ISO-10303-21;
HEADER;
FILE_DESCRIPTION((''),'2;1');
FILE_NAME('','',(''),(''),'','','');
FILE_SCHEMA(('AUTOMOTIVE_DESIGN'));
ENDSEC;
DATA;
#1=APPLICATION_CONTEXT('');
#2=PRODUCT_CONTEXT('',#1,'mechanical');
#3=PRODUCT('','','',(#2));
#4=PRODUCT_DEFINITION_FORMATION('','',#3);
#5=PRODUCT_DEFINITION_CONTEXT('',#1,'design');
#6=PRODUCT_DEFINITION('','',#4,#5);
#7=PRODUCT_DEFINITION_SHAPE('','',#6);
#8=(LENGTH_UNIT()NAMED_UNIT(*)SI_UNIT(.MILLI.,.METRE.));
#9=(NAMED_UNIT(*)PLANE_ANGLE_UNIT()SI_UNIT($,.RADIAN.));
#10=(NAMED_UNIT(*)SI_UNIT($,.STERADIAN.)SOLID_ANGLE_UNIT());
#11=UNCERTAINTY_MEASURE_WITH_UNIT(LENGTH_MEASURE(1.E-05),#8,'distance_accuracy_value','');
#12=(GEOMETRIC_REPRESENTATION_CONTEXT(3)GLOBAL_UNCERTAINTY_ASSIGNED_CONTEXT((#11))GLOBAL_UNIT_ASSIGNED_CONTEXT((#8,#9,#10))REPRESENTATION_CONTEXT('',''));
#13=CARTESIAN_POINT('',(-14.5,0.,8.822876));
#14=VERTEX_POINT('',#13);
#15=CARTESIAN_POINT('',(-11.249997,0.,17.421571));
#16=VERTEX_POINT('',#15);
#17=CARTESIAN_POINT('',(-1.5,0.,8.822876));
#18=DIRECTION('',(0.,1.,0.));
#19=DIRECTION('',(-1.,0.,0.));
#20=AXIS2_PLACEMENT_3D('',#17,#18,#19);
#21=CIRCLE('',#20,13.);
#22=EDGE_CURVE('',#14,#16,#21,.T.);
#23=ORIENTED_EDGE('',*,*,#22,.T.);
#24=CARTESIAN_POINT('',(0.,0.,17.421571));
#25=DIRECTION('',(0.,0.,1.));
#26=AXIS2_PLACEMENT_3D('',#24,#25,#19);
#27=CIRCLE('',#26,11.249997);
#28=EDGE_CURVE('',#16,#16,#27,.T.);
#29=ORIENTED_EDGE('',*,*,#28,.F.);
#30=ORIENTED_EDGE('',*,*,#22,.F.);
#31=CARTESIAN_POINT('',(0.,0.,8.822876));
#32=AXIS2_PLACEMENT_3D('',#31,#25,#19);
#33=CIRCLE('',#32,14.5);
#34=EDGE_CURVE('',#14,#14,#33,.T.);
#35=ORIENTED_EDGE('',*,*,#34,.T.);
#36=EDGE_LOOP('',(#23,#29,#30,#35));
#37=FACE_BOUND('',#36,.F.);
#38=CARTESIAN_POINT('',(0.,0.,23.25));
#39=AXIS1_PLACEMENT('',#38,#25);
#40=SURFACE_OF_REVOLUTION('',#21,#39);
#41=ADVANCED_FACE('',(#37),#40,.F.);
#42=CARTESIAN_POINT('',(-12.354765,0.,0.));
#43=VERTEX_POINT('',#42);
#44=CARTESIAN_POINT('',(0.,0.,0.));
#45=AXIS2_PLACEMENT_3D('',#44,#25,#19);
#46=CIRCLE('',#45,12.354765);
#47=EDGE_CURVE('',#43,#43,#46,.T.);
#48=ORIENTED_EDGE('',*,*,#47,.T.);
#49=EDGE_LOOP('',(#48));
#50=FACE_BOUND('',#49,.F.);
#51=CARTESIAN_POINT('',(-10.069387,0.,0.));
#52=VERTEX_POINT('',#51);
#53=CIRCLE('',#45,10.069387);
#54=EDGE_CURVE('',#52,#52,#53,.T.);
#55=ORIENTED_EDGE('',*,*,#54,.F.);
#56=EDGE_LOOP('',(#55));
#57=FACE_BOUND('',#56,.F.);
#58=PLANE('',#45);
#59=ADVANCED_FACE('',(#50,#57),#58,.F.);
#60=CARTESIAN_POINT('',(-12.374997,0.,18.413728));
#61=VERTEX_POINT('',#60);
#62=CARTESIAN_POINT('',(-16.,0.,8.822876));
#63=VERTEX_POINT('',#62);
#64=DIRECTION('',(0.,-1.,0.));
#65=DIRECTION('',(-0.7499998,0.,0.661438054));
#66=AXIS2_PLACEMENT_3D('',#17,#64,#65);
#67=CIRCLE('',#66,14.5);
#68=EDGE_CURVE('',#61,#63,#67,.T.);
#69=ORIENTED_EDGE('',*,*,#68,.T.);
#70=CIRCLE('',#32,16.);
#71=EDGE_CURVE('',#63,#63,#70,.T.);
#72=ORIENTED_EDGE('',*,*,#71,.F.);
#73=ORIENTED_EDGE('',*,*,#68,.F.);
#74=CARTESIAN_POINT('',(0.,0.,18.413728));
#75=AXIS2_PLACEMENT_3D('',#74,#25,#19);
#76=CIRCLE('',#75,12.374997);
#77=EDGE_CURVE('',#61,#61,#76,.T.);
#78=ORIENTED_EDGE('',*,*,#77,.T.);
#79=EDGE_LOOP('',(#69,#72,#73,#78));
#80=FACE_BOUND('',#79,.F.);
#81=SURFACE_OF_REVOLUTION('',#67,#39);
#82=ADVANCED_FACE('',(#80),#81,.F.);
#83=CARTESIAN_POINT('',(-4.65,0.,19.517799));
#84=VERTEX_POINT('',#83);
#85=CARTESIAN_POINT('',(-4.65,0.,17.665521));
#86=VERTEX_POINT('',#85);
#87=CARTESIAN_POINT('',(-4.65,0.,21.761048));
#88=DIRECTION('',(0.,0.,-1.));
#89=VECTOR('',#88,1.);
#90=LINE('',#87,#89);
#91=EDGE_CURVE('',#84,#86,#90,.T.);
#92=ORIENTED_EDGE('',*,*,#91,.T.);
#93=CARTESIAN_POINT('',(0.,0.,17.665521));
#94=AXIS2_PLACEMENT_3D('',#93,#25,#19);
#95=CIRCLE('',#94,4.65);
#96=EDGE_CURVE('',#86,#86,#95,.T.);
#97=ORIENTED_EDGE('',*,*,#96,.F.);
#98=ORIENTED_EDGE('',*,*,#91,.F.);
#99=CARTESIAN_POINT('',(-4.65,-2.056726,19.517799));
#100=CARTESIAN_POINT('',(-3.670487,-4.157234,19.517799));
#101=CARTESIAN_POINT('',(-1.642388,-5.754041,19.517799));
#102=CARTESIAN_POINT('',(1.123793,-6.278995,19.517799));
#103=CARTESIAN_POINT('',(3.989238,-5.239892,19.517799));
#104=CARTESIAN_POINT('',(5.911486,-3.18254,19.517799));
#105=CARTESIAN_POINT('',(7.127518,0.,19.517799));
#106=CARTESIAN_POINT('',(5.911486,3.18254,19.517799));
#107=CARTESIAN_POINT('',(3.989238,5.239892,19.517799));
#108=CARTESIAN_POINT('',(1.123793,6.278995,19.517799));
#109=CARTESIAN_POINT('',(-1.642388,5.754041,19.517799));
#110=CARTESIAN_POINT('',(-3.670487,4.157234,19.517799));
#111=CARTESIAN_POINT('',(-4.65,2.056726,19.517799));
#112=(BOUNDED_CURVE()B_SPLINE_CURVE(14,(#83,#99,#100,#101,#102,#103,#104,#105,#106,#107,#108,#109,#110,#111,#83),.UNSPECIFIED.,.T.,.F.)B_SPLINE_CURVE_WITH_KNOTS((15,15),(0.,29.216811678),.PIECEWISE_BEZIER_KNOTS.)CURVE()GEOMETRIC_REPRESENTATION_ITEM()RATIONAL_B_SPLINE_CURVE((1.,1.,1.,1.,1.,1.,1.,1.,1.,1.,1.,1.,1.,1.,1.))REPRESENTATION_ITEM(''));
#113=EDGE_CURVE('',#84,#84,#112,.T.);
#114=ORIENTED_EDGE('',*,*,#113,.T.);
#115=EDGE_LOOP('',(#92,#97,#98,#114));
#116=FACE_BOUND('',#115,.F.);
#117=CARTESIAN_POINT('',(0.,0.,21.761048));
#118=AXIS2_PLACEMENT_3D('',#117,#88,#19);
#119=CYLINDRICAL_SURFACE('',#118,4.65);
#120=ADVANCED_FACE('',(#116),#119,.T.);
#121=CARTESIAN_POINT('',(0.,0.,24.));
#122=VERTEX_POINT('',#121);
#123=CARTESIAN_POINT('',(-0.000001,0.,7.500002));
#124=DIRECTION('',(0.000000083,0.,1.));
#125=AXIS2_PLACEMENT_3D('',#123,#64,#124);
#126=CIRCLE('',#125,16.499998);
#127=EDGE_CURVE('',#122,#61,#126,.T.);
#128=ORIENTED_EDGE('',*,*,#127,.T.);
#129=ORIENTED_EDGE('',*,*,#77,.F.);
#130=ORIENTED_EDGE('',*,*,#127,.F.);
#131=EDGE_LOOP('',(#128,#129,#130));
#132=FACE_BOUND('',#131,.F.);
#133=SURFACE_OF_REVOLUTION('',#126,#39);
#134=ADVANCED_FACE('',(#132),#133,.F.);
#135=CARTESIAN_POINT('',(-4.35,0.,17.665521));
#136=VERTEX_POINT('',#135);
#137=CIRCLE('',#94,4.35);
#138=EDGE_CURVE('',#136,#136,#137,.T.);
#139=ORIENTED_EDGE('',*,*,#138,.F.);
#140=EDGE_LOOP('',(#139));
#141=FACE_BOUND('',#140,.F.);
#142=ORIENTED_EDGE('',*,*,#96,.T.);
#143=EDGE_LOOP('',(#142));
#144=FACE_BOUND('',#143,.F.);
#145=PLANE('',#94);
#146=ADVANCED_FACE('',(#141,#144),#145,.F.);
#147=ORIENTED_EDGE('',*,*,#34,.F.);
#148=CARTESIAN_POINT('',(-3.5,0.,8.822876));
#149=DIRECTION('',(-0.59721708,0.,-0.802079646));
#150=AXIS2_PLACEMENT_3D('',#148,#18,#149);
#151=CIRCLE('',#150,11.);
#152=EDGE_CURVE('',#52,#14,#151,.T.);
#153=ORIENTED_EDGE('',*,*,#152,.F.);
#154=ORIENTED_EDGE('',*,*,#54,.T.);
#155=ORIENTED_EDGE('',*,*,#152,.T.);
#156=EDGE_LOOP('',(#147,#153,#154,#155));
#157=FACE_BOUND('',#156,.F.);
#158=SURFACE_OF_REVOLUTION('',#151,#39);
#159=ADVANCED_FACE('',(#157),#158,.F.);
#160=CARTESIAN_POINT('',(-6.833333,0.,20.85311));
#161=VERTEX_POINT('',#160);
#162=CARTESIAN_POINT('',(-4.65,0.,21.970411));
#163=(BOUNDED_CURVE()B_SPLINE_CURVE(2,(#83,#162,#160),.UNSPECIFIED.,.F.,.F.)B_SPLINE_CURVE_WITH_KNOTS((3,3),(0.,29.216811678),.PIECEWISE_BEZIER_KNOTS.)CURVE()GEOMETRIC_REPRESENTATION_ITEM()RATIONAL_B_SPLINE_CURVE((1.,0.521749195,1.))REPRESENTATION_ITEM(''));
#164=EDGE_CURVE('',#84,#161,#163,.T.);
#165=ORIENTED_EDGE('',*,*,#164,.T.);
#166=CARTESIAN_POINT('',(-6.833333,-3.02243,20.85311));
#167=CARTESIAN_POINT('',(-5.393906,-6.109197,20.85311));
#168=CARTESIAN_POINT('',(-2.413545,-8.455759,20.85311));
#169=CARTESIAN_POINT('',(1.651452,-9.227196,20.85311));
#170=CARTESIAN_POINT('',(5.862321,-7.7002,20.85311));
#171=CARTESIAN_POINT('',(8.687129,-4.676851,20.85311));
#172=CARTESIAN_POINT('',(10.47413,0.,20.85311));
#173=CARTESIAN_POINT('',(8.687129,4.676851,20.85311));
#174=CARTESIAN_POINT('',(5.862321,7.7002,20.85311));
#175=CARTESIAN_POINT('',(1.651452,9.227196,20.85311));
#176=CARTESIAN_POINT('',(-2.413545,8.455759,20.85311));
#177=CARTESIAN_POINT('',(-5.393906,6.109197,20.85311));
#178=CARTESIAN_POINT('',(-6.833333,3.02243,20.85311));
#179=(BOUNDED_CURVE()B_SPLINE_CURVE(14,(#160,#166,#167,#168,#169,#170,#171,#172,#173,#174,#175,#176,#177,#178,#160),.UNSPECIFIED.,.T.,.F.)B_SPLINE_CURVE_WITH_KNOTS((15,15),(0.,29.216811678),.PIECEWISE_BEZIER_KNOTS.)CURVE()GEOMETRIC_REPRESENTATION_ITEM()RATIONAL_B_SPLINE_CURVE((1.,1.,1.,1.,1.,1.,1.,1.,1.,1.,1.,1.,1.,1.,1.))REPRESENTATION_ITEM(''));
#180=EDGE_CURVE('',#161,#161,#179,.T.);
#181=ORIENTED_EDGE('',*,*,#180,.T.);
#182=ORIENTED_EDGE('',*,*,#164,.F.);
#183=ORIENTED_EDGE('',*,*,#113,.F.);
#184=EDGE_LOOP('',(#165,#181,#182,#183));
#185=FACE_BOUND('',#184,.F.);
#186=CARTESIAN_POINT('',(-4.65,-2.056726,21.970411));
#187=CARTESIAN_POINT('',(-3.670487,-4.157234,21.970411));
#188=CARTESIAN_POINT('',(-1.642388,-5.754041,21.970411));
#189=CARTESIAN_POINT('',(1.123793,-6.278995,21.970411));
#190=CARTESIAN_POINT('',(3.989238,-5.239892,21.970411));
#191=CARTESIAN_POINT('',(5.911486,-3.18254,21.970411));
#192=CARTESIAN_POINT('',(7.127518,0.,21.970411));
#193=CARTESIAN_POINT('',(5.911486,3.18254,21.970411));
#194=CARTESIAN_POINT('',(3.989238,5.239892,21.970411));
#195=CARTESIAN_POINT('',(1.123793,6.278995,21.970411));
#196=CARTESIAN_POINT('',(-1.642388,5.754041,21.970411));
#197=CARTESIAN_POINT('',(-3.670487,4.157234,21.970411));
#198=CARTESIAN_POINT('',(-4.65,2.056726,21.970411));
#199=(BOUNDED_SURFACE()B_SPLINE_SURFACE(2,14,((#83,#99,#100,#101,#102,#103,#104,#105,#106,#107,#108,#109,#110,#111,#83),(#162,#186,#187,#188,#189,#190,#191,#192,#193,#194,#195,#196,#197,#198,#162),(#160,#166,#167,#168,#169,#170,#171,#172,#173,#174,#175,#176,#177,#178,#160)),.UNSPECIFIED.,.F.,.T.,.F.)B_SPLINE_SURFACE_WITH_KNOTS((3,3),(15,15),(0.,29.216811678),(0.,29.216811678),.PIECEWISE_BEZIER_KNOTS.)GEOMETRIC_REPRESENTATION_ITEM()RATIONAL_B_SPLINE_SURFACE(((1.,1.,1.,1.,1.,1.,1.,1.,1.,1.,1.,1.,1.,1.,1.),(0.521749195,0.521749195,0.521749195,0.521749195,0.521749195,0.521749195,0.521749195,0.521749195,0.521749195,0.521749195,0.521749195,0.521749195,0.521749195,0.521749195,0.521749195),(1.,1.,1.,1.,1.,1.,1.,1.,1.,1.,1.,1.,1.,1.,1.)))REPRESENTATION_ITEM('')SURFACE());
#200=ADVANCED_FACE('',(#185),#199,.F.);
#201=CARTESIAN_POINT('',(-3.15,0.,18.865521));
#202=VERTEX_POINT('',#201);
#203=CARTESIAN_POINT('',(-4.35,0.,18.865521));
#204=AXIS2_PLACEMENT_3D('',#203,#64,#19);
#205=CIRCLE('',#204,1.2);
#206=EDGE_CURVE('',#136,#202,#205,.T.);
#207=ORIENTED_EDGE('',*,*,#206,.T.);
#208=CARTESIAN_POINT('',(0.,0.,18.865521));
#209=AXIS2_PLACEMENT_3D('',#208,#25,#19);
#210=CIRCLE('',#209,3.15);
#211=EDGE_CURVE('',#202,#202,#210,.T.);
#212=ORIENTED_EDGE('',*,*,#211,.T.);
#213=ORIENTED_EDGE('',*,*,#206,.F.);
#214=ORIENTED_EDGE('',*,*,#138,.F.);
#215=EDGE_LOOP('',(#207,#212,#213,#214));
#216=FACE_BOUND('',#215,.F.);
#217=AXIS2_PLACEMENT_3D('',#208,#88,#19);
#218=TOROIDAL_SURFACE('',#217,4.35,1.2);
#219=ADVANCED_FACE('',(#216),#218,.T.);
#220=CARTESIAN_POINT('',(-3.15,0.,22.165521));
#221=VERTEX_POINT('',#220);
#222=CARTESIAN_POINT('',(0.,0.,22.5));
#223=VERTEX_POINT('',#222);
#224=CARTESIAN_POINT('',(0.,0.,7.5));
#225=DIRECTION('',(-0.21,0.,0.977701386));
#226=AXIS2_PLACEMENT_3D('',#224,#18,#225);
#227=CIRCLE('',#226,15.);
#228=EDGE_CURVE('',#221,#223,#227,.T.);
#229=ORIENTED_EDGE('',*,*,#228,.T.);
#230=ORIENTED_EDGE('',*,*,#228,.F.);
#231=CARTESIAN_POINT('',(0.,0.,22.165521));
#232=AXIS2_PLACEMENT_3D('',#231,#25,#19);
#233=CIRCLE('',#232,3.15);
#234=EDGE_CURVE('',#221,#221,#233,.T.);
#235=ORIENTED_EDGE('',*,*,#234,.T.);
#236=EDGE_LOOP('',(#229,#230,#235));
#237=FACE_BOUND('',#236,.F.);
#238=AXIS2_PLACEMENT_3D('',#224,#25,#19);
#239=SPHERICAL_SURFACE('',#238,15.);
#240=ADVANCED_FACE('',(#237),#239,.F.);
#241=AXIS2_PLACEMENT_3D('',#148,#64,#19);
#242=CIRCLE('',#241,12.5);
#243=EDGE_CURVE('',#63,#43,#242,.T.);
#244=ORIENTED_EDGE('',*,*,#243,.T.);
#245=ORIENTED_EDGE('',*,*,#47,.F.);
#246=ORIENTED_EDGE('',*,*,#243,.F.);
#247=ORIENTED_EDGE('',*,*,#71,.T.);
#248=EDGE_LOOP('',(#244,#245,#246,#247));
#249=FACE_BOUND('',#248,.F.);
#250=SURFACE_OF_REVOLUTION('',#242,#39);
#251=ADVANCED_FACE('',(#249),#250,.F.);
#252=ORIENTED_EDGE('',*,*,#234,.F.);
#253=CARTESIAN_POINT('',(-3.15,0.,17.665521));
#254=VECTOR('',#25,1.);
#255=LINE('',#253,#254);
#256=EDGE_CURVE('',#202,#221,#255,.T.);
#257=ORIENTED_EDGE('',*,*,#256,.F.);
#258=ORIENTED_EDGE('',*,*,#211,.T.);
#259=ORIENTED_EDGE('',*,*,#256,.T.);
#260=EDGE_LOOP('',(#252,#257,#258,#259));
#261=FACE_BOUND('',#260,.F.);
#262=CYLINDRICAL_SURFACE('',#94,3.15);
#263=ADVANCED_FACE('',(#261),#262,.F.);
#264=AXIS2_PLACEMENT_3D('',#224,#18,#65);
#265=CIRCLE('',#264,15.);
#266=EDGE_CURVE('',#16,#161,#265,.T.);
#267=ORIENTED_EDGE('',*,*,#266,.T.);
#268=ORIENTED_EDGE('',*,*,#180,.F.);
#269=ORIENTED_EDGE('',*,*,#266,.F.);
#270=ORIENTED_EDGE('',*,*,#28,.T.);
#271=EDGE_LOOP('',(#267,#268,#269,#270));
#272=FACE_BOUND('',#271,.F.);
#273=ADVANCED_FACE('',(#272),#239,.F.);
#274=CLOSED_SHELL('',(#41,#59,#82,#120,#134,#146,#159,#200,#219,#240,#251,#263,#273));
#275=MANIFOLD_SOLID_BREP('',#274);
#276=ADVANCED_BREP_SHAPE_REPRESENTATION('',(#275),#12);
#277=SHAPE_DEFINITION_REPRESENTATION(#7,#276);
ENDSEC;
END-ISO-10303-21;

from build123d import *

# Parameters (mm, degrees)
F2_R = 1.2
F3_R = 1.5


# Not quite as in the source:
# - ends of sketch curves that miss each other by under 0.0002 mm in the source are joined


with BuildPart() as f1:
    # F0 (on Front) → F1 (revolve)
    with BuildSketch(Plane.XZ):
        with BuildLine():
            ThreePointArc((-3.15, 22.1655207886), (-3.905240004, 21.9827173041), (-4.65, 21.7610483486))
            Line((-4.65, 21.7610483486), (-4.65, 17.6655207886))
            Line((-4.65, 17.6655207886), (-3.15, 17.6655207886))
            Line((-3.15, 17.6655207886), (-3.15, 22.1655207886))
        make_face()
        with BuildLine():
            ThreePointArc((-11.2499970039, 17.4215708138), (-8.2407671062, 20.0335452886), (-4.65, 21.7610483486))
            ThreePointArc((-4.65, 21.7610483486), (-3.905240004, 21.9827173041), (-3.15, 22.1655207886))
            ThreePointArc((-3.15, 22.1655207886), (-1.583854187, 22.416145813), (0, 22.5))
            Line((0, 22.5), (0, 24))
            ThreePointArc((0, 24), (-6.7887220518, 22.5387255473), (-12.3749970039, 18.4137281594))
            ThreePointArc((-12.3749970039, 18.4137281594), (-15.0635072272, 13.9494024613), (-16, 8.8228761085))
            ThreePointArc((-16, 8.8228761085), (-15.0528039963, 4.0497512852), (-12.3547648239, 0))
            Line((-12.3547648239, 0), (-10.0693874848, 0))
            ThreePointArc((-10.0693874848, 0), (-13.3301386312, 3.8864435265), (-14.4999996005, 8.8228761085))
            ThreePointArc((-14.4999996005, 8.8228761085), (-13.6603854135, 13.4190720223), (-11.2499970039, 17.4215708138))
        make_face()
    revolve(axis=Axis((0, 0, 23.25), (0, 0, 1)))

    # F2
    f2_edges = [f1.edges().sort_by_distance(p)[0] for p in [
        (3.15, 0, 17.665521),
    ]]
    fillet(f2_edges, radius=F2_R)

    # F3
    f3_edges = [f1.edges().sort_by_distance(p)[0] for p in [
        (4.65, 0, 21.761048),
    ]]
    fillet(f3_edges, radius=F3_R)


solid = f1.part
